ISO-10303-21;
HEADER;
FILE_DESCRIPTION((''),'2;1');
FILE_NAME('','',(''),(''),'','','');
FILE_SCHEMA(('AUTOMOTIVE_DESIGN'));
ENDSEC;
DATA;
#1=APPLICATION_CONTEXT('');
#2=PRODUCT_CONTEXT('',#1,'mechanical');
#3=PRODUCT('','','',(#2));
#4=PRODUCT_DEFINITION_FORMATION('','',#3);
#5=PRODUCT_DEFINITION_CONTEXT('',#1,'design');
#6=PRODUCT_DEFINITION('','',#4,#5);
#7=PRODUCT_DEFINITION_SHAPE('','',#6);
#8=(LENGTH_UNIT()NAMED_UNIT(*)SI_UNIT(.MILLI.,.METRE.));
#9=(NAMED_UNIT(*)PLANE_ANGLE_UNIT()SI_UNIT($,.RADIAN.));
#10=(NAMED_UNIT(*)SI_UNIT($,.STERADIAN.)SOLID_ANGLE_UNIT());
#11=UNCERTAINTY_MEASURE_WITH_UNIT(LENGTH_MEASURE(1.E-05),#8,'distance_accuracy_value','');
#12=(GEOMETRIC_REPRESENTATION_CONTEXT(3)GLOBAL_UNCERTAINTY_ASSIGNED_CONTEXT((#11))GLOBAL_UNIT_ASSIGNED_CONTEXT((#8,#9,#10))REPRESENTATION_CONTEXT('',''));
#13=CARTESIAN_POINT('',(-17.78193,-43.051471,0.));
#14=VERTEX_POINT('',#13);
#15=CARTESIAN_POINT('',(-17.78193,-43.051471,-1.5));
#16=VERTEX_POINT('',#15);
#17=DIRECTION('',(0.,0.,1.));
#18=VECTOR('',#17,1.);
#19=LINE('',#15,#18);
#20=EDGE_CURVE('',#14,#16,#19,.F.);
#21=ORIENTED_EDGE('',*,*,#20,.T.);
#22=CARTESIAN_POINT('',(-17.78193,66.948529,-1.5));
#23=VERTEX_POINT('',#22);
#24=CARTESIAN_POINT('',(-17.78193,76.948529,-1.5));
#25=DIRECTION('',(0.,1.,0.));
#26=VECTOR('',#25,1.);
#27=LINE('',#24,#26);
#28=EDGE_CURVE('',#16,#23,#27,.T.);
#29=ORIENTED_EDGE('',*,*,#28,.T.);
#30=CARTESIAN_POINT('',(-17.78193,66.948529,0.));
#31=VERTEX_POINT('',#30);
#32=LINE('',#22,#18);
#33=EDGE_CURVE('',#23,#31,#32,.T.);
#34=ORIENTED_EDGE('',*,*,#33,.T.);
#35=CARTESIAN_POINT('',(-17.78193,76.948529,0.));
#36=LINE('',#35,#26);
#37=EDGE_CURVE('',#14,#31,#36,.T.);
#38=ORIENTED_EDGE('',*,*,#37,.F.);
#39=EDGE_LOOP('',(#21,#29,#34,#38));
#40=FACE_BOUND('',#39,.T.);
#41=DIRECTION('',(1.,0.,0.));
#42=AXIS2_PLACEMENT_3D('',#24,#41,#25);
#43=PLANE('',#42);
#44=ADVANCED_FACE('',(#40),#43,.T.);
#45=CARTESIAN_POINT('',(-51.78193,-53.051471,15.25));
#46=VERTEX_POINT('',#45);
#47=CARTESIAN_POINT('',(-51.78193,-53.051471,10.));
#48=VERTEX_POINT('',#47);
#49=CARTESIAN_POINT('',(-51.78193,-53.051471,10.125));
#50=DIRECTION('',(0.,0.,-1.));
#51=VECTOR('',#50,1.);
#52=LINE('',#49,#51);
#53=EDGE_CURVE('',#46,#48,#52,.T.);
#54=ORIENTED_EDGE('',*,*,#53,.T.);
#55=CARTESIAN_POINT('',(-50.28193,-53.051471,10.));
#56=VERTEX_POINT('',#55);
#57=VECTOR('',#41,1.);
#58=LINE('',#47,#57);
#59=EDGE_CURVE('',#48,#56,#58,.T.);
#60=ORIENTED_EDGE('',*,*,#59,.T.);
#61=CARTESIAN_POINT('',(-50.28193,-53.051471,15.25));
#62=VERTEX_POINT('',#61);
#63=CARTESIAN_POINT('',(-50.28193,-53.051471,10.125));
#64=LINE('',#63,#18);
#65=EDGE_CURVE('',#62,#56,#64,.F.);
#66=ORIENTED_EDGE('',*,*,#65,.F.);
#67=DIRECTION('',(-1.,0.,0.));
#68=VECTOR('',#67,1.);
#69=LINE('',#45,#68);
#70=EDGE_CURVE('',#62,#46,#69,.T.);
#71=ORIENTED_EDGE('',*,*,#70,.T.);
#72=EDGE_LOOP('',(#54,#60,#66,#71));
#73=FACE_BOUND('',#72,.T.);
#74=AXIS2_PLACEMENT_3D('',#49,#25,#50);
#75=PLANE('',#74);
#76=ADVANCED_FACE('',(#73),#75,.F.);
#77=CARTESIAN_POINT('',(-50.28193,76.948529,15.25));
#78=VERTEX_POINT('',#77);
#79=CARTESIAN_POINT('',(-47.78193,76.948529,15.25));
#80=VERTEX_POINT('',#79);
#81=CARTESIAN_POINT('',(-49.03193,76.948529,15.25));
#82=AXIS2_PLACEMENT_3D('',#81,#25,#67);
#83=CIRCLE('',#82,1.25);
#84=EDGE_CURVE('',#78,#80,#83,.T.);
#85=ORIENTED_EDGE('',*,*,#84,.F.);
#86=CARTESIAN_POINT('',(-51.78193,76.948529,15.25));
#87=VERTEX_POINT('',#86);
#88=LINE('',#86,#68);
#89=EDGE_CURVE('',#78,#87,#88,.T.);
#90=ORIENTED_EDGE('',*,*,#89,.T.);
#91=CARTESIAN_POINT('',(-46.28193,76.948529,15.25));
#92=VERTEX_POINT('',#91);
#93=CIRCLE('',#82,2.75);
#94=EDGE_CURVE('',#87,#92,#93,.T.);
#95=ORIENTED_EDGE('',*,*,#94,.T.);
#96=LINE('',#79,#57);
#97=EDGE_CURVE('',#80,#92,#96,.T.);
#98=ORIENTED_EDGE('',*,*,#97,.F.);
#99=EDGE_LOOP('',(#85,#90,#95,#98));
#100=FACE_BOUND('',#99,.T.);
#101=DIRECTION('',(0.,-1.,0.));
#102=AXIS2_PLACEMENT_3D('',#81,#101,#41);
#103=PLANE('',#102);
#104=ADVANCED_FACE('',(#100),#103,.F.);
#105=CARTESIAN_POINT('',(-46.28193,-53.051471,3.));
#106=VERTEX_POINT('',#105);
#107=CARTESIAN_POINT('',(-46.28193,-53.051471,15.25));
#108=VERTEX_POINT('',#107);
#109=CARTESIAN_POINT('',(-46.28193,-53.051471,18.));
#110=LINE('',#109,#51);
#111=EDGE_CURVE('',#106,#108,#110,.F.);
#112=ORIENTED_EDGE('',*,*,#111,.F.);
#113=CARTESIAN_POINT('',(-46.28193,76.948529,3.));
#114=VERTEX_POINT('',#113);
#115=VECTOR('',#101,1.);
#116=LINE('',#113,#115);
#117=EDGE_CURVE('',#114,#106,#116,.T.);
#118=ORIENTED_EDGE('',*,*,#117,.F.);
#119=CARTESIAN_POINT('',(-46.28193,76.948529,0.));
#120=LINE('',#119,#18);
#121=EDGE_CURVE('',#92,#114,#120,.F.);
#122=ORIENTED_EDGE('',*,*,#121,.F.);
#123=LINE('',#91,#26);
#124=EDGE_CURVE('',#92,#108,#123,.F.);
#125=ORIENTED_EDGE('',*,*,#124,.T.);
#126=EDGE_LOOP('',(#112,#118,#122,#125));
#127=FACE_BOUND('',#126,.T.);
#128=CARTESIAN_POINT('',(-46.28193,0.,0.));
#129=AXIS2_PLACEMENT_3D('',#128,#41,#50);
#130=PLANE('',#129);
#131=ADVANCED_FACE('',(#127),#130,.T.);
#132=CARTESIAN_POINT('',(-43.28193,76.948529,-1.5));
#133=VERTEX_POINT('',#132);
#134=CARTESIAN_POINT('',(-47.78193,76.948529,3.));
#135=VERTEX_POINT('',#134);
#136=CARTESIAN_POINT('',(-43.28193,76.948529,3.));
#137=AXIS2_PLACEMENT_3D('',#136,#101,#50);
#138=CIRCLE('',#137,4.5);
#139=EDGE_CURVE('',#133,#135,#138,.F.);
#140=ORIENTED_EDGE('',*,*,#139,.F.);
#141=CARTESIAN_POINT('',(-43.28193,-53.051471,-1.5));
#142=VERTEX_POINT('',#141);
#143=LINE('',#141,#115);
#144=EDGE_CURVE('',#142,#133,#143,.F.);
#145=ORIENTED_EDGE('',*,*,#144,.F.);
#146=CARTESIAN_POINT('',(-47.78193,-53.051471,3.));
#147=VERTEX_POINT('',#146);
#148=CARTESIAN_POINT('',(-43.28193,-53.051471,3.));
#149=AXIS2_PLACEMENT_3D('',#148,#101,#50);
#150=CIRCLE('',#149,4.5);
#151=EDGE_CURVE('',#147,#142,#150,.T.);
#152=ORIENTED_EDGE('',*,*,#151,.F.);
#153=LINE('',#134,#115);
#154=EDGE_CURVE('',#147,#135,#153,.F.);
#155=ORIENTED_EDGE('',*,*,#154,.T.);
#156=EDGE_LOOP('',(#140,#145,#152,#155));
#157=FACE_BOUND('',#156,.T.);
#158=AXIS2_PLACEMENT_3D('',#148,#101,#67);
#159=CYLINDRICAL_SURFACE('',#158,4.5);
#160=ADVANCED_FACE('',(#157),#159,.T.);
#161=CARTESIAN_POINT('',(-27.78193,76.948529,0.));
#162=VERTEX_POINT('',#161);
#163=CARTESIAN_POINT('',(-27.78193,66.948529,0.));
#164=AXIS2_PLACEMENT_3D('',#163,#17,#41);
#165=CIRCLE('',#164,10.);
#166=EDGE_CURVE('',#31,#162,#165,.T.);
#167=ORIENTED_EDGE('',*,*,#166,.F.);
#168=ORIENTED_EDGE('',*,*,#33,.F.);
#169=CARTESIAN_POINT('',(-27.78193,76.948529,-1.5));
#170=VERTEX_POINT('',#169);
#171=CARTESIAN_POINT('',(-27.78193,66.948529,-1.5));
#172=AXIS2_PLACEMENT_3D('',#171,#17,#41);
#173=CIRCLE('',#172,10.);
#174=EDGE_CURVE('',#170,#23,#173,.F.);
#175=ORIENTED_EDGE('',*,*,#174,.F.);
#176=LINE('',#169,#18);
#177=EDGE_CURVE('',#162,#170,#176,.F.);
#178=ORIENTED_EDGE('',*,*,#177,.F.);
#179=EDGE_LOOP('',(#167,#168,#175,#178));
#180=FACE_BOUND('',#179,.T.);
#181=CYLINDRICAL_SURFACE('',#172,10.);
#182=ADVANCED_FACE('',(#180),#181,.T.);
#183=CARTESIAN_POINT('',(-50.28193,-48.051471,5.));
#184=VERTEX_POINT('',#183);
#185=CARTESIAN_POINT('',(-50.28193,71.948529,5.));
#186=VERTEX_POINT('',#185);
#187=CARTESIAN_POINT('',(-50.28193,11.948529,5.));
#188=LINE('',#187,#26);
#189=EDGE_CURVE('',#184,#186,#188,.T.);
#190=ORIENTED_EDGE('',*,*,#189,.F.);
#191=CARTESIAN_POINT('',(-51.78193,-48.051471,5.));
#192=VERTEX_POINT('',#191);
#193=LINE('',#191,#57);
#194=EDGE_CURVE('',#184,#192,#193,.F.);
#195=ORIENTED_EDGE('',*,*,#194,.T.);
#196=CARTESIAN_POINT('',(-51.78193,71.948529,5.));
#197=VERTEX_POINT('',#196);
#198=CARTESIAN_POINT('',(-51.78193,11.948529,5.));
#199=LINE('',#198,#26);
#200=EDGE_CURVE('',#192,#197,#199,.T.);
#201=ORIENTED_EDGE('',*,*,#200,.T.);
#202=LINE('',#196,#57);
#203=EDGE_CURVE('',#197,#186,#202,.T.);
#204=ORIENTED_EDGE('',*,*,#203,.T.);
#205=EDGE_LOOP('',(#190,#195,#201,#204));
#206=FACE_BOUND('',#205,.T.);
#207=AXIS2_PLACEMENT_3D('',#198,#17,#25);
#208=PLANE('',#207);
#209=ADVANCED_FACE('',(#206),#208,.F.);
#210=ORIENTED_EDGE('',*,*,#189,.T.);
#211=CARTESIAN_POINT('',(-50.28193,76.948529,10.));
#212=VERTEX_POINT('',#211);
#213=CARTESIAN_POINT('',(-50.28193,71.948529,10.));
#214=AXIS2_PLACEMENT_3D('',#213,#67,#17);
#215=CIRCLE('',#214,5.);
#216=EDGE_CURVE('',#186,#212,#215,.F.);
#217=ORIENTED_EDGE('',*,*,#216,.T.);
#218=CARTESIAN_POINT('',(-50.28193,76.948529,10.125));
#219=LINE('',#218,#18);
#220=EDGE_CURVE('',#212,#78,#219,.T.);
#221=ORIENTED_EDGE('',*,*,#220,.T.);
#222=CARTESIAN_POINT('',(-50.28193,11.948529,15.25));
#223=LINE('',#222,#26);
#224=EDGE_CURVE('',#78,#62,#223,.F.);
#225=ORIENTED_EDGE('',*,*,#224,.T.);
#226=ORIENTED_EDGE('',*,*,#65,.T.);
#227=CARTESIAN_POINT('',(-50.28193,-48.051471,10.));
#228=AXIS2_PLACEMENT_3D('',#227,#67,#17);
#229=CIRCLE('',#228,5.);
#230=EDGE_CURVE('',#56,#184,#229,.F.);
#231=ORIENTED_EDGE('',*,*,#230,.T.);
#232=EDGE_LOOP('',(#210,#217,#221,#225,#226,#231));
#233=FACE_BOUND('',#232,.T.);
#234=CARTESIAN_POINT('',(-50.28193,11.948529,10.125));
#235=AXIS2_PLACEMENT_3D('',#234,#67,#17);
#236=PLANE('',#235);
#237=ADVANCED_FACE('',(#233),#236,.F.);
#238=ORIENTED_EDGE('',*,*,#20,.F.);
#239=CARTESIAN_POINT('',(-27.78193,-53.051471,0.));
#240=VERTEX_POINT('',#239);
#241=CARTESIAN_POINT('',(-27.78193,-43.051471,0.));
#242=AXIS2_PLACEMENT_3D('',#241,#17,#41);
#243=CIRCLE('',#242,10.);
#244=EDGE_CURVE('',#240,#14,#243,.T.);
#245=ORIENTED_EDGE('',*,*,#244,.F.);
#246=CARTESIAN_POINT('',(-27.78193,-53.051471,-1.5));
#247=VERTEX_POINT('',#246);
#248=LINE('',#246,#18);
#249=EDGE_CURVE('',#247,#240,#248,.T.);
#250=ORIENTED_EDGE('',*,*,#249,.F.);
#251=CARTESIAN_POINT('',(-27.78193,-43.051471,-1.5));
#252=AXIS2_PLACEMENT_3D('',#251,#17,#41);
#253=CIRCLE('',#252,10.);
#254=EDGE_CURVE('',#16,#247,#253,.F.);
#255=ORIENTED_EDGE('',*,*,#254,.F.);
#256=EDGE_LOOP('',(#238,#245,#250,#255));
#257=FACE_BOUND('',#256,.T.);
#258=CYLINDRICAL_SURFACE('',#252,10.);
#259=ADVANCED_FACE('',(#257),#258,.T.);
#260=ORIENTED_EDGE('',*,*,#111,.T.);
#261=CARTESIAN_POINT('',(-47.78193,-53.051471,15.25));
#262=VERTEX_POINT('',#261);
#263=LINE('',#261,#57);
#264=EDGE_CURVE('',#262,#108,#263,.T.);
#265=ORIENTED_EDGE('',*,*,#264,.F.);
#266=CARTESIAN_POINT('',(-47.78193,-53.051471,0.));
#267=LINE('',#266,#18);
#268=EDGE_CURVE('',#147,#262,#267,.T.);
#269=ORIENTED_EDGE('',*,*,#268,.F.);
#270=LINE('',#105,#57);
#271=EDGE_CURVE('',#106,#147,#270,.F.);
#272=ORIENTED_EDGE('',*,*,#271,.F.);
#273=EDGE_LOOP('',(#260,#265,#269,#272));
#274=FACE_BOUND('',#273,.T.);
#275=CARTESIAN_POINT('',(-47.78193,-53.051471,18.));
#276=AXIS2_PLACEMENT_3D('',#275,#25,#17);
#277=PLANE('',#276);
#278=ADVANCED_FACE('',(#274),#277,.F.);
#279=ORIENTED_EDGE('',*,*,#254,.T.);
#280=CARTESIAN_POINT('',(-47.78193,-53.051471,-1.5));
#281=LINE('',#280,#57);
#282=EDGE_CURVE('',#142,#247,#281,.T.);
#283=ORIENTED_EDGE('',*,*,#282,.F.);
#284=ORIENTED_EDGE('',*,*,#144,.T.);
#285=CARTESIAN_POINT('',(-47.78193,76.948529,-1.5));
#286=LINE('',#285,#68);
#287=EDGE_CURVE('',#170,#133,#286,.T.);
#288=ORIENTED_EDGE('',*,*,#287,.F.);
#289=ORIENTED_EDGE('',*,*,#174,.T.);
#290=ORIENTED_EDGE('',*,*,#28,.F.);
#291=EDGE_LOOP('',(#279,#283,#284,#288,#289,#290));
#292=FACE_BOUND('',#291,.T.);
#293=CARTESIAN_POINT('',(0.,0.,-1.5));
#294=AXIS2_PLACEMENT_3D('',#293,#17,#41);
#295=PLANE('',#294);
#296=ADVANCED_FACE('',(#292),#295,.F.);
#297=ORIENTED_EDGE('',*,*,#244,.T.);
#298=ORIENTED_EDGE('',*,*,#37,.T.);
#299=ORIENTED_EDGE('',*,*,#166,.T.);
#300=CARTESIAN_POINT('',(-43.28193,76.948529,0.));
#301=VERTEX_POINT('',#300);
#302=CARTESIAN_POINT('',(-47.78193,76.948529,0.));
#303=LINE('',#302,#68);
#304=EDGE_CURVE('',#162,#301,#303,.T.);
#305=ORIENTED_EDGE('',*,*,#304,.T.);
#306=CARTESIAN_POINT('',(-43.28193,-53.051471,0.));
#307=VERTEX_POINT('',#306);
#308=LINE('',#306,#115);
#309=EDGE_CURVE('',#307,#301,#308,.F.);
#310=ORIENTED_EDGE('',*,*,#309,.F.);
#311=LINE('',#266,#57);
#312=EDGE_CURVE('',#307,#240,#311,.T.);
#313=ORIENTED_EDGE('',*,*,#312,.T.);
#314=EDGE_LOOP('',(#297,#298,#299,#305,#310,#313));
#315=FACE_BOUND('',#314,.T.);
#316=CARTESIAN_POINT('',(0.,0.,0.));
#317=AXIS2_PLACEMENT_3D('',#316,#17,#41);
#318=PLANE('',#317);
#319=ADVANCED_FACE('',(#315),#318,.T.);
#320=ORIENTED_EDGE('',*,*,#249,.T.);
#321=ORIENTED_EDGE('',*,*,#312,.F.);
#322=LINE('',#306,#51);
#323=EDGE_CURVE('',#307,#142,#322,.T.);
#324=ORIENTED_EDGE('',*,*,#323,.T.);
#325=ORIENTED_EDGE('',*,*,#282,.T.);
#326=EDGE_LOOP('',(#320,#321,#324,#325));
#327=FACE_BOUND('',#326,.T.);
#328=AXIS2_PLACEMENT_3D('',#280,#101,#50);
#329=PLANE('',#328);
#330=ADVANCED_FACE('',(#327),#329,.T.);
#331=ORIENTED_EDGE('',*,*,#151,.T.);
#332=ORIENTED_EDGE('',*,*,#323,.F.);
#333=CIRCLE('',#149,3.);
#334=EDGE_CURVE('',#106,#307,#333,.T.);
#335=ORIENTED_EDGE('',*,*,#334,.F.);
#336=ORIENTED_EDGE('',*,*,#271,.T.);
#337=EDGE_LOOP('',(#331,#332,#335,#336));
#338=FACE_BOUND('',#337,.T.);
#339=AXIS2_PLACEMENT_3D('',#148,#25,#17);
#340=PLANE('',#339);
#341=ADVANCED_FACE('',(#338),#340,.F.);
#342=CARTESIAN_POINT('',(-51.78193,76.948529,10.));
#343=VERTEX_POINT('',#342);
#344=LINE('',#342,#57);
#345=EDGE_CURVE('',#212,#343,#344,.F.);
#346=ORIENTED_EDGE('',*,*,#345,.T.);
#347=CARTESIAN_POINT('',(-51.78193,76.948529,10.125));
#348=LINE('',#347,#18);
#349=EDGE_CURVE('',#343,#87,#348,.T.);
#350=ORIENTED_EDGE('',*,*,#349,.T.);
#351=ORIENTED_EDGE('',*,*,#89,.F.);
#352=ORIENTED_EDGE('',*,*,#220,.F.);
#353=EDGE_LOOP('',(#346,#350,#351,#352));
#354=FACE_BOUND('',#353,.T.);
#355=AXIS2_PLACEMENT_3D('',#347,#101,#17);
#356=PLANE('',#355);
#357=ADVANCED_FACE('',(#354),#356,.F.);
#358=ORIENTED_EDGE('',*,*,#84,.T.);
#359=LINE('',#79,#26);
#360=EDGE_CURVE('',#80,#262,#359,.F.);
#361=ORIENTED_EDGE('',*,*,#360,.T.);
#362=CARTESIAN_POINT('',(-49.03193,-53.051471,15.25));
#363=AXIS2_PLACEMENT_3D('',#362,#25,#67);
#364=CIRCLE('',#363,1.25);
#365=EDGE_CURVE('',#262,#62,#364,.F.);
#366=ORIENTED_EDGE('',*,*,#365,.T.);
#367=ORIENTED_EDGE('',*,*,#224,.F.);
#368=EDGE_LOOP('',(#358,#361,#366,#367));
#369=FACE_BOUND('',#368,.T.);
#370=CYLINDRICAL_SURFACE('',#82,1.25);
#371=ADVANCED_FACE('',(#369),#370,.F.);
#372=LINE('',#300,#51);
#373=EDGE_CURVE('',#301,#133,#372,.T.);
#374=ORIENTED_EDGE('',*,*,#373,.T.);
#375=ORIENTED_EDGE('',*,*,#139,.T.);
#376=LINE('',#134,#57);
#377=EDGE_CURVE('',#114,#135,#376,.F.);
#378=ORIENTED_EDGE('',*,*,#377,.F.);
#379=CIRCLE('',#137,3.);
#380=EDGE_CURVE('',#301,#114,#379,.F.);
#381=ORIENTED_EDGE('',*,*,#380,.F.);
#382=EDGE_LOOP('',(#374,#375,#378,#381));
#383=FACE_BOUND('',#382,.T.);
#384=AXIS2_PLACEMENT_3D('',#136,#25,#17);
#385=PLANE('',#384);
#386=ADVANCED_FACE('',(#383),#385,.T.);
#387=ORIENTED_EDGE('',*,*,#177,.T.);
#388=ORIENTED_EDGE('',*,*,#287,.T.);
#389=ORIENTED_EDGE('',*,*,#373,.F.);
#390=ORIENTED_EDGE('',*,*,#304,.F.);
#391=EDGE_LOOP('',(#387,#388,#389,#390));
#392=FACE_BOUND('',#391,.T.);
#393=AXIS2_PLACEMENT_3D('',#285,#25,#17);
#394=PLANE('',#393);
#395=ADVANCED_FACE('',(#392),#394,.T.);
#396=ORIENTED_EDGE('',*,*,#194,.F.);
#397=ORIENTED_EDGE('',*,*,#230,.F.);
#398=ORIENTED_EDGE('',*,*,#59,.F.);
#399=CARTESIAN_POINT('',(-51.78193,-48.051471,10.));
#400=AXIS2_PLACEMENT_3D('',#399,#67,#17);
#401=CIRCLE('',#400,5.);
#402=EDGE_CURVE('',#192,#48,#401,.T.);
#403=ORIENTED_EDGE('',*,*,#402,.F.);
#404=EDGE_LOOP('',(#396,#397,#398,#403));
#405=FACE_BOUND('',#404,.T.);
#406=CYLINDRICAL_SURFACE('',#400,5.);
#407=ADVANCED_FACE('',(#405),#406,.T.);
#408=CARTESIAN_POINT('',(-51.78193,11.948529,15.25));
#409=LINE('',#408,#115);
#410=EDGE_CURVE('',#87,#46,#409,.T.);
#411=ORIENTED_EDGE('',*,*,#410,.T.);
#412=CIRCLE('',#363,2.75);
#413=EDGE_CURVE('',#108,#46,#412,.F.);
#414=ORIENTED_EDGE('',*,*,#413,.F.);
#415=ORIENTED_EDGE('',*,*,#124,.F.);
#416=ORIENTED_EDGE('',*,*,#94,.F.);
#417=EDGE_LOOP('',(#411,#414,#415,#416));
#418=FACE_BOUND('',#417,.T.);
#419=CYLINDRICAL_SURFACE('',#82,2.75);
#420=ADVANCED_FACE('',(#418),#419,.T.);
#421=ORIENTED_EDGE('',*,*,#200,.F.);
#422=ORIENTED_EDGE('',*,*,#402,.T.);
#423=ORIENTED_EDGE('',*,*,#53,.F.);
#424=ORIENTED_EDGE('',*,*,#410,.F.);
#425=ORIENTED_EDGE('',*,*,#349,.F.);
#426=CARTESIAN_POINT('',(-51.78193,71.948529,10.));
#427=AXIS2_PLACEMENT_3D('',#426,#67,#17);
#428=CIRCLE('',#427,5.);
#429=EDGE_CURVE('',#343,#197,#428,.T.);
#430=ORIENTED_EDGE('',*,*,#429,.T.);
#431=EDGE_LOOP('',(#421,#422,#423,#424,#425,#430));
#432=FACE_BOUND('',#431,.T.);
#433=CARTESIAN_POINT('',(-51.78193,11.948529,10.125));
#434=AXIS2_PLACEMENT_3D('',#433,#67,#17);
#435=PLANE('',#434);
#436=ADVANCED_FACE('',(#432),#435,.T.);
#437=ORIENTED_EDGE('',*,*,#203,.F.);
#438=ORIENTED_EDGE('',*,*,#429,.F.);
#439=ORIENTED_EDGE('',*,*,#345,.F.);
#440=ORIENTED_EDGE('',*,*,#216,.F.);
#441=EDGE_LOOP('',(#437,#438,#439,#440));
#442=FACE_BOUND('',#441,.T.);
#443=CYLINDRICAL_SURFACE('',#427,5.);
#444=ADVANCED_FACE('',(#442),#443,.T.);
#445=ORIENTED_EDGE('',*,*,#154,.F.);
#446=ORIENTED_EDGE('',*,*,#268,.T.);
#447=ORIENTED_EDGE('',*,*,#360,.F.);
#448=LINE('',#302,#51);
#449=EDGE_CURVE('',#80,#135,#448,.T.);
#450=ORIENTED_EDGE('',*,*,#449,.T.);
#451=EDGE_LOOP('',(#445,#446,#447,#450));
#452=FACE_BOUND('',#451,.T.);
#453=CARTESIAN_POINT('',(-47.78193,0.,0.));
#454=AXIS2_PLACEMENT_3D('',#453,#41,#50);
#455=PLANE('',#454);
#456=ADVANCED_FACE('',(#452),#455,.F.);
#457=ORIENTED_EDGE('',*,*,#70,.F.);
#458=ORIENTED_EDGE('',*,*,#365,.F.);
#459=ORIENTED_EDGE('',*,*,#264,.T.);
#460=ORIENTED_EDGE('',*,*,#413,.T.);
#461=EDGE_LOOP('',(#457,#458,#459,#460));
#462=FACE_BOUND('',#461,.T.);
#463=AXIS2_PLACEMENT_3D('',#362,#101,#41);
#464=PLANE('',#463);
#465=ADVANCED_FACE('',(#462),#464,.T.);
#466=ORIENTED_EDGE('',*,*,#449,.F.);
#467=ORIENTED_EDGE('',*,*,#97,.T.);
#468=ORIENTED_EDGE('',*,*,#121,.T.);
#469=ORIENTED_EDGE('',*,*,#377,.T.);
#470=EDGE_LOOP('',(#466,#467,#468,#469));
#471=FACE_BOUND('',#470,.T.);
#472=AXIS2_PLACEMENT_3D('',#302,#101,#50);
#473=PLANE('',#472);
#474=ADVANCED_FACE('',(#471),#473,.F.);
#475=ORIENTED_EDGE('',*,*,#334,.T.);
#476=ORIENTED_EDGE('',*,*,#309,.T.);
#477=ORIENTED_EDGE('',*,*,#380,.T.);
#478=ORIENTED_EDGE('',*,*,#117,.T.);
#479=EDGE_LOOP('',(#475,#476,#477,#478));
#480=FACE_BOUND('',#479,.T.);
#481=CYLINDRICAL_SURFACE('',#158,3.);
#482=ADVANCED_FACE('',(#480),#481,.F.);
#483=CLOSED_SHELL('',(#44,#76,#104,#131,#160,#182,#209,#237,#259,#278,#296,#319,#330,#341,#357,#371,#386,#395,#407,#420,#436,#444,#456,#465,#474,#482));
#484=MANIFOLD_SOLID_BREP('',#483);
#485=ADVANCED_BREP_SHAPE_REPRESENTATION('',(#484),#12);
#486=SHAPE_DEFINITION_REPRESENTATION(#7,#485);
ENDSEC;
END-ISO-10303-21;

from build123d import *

# Parameters (mm, degrees)
IZIM1_W                      = 30
IZIM1_H                      = 130
TABAN_FLAN_1_DEPTH           = 1.5
RADYUS1_R                    = 10
KENAR_FLAN_1_STRIP_W         = 12
KENAR_FLAN_1_STRIP_H         = 1.5
KENAR_FLAN_1_STRIP_CUT_DEPTH = 130
KENAR_FLAN_1_DEPTH           = 130
KENAR_START                  = -53.051470588
KENAR_EKME1_DEPTH            = 130
KENAR_EKME1_2_DEPTH          = 130
RADYUS2_R                    = 5


# Read off the part's stored shape, not the designer's step: Kenar Çekme1
# Sheet-metal steps are written as plain solids
with BuildPart() as part:
    # Çizim1 → Taban-Flanş1 (new body)
    with BuildSketch(Plane.XY):
        with Locations((-32.781930006, 11.948529412)):
            Rectangle(IZIM1_W, IZIM1_H)
    extrude(amount=-TABAN_FLAN_1_DEPTH)

    # Radyus1
    radyus1_edges = [part.edges().sort_by_distance(p)[0] for p in [
        (-17.781930006, 76.948529412, -0.75),
        (-17.781930006, -53.051470588, -0.75),
    ]]
    fillet(radyus1_edges, radius=RADYUS1_R)

    # Kenar-Flanş1 strip (across the edge) → Kenar-Flanş1 strip cut (cut)
    with BuildSketch(Plane(origin=(-47.781930006, 76.948529412, 0), x_dir=(1, 0, 0), z_dir=(0, -1, 0))):
        with Locations((-1.5, -0.75)):
            Rectangle(KENAR_FLAN_1_STRIP_W, KENAR_FLAN_1_STRIP_H)
    extrude(amount=KENAR_FLAN_1_STRIP_CUT_DEPTH, mode=Mode.SUBTRACT)

    # Kenar-Flanş1 section (across the edge) → Kenar-Flanş1 (add)
    with BuildSketch(Plane(origin=(-47.781930006, 76.948529412, 0), x_dir=(1, 0, 0), z_dir=(0, -1, 0))):
        with BuildLine():
            Line((0, 3), (0, 18))
            Line((0, 18), (1.5, 18))
            Line((1.5, 18), (1.5, 3))
            ThreePointArc((1.5, 3), (2.378679656, 0.878679656), (4.5, 0))
            Line((4.5, 0), (4.5, -1.5))
            ThreePointArc((4.5, -1.5), (1.318019485, -0.181980515), (0, 3))
        make_face()
    extrude(amount=KENAR_FLAN_1_DEPTH)

    # Kenar Çekme1 outline → Kenar Çekme1 (cut)
    with BuildSketch(Plane(origin=(0, 0, 0), x_dir=(1, 0, 0), z_dir=(0, 1, 0)).offset(KENAR_START)):
        with BuildLine():
            ThreePointArc((-46.281930006, -15.25), (-46.686722126, -16.686140662), (-47.781930006, -17.699489743))
            Line((-47.781930006, -17.699489743), (-47.781930006, -18))
            Line((-47.781930006, -18), (-46.281930006, -18))
            Line((-46.281930006, -18), (-46.281930006, -15.25))
        make_face()
    extrude(amount=KENAR_EKME1_DEPTH, mode=Mode.SUBTRACT)

    # Kenar _ekme1 2 outline → Kenar _ekme1 2 (add)
    with BuildSketch(Plane(origin=(0, 0, 0), x_dir=(1, 0, 0), z_dir=(0, 1, 0)).offset(KENAR_START)):
        with BuildLine():
            Line((-50.281930006, -5), (-51.781930006, -5))
            Line((-51.781930006, -5), (-51.781930006, -15.25))
            ThreePointArc((-51.781930006, -15.25), (-50.468070668, -17.59520788), (-47.781930006, -17.699489743))
            Line((-47.781930006, -17.699489743), (-47.781930006, -15.25))
            ThreePointArc((-47.781930006, -15.25), (-49.031930006, -16.5), (-50.281930006, -15.25))
            Line((-50.281930006, -15.25), (-50.281930006, -5))
        make_face()
    extrude(amount=KENAR_EKME1_2_DEPTH)

    # Radyus2
    radyus2_edges = [part.edges().sort_by_distance(p)[0] for p in [
        (-51.031930006, 76.948529412, 5),
        (-51.031930006, -53.051470588, 5),
    ]]
    fillet(radyus2_edges, radius=RADYUS2_R)


solid = part.part
